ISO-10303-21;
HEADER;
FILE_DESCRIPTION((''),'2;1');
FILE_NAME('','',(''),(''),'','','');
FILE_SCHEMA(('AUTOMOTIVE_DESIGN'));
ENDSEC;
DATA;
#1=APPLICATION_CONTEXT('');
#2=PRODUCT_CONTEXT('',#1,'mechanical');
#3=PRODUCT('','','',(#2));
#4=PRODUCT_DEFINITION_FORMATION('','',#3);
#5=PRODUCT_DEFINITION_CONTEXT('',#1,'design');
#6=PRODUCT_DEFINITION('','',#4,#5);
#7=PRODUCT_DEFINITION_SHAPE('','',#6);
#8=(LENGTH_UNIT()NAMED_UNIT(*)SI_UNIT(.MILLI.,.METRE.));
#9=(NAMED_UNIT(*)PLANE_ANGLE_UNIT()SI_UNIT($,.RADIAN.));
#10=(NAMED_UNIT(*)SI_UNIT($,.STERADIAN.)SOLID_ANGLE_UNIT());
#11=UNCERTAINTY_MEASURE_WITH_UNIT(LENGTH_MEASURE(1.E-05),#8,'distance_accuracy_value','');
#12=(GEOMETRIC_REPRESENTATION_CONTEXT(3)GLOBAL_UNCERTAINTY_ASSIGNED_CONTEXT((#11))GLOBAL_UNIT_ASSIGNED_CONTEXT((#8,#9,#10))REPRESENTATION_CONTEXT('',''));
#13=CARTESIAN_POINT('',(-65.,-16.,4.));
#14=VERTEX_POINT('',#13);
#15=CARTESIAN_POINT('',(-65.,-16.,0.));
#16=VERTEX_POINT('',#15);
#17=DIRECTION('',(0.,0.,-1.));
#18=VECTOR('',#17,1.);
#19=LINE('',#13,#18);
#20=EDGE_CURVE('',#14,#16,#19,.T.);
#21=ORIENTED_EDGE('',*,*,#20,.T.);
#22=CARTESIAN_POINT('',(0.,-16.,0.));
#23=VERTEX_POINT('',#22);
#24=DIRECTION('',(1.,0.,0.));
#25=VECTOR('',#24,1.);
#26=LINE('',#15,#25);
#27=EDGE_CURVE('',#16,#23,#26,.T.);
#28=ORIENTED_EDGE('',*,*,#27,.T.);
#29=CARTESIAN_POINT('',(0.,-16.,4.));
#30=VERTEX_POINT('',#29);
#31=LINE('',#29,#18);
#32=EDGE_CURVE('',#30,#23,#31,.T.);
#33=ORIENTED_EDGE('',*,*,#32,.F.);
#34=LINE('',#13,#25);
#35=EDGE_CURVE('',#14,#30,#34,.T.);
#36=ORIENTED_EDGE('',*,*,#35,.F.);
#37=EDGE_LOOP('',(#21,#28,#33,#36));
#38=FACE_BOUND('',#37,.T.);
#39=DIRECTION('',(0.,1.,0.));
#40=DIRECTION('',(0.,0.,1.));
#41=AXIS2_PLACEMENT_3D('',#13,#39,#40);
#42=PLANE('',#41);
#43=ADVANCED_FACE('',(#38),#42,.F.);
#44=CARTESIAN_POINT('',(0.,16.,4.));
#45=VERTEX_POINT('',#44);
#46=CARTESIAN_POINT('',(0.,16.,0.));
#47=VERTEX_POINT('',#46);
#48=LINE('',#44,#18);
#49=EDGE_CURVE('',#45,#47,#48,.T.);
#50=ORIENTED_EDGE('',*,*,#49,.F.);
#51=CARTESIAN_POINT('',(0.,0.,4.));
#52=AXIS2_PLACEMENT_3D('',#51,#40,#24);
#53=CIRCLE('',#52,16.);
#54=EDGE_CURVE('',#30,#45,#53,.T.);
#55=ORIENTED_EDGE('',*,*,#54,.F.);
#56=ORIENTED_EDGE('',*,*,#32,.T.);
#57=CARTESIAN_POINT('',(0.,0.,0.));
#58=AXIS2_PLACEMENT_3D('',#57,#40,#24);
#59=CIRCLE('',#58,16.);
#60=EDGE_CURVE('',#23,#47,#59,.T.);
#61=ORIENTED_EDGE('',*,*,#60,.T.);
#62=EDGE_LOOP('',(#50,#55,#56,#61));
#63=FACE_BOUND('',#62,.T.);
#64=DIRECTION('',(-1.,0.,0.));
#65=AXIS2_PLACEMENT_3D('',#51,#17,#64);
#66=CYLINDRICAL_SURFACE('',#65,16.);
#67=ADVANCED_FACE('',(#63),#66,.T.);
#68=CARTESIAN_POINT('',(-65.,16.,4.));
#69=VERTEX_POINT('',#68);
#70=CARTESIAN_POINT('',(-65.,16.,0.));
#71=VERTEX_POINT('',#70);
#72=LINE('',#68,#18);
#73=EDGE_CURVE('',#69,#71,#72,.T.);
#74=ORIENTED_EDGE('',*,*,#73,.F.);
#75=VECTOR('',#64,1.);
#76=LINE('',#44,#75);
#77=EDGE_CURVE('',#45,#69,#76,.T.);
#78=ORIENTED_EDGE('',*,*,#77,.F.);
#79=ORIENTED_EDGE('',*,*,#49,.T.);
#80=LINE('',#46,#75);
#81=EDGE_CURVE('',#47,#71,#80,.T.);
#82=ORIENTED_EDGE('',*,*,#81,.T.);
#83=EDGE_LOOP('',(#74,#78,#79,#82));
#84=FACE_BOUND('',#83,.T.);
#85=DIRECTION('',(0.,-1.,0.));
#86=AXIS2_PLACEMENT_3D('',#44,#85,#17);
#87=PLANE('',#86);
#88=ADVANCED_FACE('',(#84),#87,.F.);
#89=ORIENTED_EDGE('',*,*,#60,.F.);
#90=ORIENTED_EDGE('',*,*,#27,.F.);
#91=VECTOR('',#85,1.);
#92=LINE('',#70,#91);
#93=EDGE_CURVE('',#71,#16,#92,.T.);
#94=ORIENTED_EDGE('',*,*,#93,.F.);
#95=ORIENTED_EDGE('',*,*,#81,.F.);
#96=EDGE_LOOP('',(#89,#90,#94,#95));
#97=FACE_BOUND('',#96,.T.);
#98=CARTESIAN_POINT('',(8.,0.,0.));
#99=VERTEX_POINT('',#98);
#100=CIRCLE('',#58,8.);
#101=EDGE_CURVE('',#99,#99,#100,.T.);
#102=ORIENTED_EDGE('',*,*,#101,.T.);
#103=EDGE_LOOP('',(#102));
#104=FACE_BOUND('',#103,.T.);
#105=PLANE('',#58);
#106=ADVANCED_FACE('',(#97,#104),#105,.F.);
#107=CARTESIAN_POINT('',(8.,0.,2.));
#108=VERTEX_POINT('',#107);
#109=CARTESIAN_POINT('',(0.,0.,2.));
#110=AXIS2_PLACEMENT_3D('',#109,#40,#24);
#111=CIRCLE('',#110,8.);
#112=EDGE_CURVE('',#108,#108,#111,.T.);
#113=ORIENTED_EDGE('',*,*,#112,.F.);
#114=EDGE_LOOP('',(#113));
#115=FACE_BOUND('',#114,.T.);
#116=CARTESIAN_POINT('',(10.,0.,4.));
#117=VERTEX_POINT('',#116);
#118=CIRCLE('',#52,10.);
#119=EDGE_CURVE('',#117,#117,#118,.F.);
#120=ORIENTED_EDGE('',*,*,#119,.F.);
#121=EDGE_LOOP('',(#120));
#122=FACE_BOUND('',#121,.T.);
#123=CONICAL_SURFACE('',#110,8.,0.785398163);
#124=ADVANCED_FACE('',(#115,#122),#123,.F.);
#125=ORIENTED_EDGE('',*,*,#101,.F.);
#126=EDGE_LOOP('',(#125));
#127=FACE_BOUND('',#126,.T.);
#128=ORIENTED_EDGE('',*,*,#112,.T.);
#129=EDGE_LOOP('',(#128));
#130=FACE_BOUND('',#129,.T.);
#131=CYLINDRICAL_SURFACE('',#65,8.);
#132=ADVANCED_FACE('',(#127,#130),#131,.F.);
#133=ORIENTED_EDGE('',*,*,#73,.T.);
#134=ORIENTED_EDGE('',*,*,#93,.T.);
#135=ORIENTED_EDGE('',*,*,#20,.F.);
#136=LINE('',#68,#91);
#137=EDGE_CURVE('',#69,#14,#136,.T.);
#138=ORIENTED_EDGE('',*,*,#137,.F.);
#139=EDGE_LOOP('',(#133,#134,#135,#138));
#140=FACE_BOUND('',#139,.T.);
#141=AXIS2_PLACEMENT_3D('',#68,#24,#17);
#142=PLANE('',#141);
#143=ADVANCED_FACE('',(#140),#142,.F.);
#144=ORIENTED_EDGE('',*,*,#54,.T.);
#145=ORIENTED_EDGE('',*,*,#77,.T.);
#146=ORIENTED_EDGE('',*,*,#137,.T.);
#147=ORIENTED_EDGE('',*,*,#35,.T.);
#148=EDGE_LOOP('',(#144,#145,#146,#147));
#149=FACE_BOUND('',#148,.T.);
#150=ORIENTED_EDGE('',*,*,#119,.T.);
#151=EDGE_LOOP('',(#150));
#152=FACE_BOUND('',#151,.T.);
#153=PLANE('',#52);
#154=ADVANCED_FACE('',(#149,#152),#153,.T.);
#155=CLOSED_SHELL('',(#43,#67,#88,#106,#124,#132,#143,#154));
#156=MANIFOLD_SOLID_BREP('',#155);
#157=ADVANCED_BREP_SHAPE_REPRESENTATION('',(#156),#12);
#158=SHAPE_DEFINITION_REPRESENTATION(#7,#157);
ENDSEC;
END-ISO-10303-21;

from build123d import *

# Parameters (mm, degrees)
SKETCH_1_R             = 8
SM_BASE_FLANGE_1_DEPTH = 4
CHAMFER_1_SIZE         = 2


# Sheet-metal steps are written as plain solids
with BuildPart() as part:
    # Sketch 1 → Базовая кромка1 (new body)
    with BuildSketch(Plane.XY):
        with BuildLine():
            Line((0, 16), (-65, 16))
            Line((-65, 16), (-65, -16))
            Line((-65, -16), (0, -16))
            ThreePointArc((0, -16), (16, 0), (0, 16))
        make_face()
        Circle(SKETCH_1_R, mode=Mode.SUBTRACT)
    extrude(amount=SM_BASE_FLANGE_1_DEPTH)

    # Фаска1
    chamfer_1_edges = [part.edges().sort_by_distance(p)[0] for p in [
        (-8, 0, 4),
    ]]
    chamfer(chamfer_1_edges, length=CHAMFER_1_SIZE)


solid = part.part
